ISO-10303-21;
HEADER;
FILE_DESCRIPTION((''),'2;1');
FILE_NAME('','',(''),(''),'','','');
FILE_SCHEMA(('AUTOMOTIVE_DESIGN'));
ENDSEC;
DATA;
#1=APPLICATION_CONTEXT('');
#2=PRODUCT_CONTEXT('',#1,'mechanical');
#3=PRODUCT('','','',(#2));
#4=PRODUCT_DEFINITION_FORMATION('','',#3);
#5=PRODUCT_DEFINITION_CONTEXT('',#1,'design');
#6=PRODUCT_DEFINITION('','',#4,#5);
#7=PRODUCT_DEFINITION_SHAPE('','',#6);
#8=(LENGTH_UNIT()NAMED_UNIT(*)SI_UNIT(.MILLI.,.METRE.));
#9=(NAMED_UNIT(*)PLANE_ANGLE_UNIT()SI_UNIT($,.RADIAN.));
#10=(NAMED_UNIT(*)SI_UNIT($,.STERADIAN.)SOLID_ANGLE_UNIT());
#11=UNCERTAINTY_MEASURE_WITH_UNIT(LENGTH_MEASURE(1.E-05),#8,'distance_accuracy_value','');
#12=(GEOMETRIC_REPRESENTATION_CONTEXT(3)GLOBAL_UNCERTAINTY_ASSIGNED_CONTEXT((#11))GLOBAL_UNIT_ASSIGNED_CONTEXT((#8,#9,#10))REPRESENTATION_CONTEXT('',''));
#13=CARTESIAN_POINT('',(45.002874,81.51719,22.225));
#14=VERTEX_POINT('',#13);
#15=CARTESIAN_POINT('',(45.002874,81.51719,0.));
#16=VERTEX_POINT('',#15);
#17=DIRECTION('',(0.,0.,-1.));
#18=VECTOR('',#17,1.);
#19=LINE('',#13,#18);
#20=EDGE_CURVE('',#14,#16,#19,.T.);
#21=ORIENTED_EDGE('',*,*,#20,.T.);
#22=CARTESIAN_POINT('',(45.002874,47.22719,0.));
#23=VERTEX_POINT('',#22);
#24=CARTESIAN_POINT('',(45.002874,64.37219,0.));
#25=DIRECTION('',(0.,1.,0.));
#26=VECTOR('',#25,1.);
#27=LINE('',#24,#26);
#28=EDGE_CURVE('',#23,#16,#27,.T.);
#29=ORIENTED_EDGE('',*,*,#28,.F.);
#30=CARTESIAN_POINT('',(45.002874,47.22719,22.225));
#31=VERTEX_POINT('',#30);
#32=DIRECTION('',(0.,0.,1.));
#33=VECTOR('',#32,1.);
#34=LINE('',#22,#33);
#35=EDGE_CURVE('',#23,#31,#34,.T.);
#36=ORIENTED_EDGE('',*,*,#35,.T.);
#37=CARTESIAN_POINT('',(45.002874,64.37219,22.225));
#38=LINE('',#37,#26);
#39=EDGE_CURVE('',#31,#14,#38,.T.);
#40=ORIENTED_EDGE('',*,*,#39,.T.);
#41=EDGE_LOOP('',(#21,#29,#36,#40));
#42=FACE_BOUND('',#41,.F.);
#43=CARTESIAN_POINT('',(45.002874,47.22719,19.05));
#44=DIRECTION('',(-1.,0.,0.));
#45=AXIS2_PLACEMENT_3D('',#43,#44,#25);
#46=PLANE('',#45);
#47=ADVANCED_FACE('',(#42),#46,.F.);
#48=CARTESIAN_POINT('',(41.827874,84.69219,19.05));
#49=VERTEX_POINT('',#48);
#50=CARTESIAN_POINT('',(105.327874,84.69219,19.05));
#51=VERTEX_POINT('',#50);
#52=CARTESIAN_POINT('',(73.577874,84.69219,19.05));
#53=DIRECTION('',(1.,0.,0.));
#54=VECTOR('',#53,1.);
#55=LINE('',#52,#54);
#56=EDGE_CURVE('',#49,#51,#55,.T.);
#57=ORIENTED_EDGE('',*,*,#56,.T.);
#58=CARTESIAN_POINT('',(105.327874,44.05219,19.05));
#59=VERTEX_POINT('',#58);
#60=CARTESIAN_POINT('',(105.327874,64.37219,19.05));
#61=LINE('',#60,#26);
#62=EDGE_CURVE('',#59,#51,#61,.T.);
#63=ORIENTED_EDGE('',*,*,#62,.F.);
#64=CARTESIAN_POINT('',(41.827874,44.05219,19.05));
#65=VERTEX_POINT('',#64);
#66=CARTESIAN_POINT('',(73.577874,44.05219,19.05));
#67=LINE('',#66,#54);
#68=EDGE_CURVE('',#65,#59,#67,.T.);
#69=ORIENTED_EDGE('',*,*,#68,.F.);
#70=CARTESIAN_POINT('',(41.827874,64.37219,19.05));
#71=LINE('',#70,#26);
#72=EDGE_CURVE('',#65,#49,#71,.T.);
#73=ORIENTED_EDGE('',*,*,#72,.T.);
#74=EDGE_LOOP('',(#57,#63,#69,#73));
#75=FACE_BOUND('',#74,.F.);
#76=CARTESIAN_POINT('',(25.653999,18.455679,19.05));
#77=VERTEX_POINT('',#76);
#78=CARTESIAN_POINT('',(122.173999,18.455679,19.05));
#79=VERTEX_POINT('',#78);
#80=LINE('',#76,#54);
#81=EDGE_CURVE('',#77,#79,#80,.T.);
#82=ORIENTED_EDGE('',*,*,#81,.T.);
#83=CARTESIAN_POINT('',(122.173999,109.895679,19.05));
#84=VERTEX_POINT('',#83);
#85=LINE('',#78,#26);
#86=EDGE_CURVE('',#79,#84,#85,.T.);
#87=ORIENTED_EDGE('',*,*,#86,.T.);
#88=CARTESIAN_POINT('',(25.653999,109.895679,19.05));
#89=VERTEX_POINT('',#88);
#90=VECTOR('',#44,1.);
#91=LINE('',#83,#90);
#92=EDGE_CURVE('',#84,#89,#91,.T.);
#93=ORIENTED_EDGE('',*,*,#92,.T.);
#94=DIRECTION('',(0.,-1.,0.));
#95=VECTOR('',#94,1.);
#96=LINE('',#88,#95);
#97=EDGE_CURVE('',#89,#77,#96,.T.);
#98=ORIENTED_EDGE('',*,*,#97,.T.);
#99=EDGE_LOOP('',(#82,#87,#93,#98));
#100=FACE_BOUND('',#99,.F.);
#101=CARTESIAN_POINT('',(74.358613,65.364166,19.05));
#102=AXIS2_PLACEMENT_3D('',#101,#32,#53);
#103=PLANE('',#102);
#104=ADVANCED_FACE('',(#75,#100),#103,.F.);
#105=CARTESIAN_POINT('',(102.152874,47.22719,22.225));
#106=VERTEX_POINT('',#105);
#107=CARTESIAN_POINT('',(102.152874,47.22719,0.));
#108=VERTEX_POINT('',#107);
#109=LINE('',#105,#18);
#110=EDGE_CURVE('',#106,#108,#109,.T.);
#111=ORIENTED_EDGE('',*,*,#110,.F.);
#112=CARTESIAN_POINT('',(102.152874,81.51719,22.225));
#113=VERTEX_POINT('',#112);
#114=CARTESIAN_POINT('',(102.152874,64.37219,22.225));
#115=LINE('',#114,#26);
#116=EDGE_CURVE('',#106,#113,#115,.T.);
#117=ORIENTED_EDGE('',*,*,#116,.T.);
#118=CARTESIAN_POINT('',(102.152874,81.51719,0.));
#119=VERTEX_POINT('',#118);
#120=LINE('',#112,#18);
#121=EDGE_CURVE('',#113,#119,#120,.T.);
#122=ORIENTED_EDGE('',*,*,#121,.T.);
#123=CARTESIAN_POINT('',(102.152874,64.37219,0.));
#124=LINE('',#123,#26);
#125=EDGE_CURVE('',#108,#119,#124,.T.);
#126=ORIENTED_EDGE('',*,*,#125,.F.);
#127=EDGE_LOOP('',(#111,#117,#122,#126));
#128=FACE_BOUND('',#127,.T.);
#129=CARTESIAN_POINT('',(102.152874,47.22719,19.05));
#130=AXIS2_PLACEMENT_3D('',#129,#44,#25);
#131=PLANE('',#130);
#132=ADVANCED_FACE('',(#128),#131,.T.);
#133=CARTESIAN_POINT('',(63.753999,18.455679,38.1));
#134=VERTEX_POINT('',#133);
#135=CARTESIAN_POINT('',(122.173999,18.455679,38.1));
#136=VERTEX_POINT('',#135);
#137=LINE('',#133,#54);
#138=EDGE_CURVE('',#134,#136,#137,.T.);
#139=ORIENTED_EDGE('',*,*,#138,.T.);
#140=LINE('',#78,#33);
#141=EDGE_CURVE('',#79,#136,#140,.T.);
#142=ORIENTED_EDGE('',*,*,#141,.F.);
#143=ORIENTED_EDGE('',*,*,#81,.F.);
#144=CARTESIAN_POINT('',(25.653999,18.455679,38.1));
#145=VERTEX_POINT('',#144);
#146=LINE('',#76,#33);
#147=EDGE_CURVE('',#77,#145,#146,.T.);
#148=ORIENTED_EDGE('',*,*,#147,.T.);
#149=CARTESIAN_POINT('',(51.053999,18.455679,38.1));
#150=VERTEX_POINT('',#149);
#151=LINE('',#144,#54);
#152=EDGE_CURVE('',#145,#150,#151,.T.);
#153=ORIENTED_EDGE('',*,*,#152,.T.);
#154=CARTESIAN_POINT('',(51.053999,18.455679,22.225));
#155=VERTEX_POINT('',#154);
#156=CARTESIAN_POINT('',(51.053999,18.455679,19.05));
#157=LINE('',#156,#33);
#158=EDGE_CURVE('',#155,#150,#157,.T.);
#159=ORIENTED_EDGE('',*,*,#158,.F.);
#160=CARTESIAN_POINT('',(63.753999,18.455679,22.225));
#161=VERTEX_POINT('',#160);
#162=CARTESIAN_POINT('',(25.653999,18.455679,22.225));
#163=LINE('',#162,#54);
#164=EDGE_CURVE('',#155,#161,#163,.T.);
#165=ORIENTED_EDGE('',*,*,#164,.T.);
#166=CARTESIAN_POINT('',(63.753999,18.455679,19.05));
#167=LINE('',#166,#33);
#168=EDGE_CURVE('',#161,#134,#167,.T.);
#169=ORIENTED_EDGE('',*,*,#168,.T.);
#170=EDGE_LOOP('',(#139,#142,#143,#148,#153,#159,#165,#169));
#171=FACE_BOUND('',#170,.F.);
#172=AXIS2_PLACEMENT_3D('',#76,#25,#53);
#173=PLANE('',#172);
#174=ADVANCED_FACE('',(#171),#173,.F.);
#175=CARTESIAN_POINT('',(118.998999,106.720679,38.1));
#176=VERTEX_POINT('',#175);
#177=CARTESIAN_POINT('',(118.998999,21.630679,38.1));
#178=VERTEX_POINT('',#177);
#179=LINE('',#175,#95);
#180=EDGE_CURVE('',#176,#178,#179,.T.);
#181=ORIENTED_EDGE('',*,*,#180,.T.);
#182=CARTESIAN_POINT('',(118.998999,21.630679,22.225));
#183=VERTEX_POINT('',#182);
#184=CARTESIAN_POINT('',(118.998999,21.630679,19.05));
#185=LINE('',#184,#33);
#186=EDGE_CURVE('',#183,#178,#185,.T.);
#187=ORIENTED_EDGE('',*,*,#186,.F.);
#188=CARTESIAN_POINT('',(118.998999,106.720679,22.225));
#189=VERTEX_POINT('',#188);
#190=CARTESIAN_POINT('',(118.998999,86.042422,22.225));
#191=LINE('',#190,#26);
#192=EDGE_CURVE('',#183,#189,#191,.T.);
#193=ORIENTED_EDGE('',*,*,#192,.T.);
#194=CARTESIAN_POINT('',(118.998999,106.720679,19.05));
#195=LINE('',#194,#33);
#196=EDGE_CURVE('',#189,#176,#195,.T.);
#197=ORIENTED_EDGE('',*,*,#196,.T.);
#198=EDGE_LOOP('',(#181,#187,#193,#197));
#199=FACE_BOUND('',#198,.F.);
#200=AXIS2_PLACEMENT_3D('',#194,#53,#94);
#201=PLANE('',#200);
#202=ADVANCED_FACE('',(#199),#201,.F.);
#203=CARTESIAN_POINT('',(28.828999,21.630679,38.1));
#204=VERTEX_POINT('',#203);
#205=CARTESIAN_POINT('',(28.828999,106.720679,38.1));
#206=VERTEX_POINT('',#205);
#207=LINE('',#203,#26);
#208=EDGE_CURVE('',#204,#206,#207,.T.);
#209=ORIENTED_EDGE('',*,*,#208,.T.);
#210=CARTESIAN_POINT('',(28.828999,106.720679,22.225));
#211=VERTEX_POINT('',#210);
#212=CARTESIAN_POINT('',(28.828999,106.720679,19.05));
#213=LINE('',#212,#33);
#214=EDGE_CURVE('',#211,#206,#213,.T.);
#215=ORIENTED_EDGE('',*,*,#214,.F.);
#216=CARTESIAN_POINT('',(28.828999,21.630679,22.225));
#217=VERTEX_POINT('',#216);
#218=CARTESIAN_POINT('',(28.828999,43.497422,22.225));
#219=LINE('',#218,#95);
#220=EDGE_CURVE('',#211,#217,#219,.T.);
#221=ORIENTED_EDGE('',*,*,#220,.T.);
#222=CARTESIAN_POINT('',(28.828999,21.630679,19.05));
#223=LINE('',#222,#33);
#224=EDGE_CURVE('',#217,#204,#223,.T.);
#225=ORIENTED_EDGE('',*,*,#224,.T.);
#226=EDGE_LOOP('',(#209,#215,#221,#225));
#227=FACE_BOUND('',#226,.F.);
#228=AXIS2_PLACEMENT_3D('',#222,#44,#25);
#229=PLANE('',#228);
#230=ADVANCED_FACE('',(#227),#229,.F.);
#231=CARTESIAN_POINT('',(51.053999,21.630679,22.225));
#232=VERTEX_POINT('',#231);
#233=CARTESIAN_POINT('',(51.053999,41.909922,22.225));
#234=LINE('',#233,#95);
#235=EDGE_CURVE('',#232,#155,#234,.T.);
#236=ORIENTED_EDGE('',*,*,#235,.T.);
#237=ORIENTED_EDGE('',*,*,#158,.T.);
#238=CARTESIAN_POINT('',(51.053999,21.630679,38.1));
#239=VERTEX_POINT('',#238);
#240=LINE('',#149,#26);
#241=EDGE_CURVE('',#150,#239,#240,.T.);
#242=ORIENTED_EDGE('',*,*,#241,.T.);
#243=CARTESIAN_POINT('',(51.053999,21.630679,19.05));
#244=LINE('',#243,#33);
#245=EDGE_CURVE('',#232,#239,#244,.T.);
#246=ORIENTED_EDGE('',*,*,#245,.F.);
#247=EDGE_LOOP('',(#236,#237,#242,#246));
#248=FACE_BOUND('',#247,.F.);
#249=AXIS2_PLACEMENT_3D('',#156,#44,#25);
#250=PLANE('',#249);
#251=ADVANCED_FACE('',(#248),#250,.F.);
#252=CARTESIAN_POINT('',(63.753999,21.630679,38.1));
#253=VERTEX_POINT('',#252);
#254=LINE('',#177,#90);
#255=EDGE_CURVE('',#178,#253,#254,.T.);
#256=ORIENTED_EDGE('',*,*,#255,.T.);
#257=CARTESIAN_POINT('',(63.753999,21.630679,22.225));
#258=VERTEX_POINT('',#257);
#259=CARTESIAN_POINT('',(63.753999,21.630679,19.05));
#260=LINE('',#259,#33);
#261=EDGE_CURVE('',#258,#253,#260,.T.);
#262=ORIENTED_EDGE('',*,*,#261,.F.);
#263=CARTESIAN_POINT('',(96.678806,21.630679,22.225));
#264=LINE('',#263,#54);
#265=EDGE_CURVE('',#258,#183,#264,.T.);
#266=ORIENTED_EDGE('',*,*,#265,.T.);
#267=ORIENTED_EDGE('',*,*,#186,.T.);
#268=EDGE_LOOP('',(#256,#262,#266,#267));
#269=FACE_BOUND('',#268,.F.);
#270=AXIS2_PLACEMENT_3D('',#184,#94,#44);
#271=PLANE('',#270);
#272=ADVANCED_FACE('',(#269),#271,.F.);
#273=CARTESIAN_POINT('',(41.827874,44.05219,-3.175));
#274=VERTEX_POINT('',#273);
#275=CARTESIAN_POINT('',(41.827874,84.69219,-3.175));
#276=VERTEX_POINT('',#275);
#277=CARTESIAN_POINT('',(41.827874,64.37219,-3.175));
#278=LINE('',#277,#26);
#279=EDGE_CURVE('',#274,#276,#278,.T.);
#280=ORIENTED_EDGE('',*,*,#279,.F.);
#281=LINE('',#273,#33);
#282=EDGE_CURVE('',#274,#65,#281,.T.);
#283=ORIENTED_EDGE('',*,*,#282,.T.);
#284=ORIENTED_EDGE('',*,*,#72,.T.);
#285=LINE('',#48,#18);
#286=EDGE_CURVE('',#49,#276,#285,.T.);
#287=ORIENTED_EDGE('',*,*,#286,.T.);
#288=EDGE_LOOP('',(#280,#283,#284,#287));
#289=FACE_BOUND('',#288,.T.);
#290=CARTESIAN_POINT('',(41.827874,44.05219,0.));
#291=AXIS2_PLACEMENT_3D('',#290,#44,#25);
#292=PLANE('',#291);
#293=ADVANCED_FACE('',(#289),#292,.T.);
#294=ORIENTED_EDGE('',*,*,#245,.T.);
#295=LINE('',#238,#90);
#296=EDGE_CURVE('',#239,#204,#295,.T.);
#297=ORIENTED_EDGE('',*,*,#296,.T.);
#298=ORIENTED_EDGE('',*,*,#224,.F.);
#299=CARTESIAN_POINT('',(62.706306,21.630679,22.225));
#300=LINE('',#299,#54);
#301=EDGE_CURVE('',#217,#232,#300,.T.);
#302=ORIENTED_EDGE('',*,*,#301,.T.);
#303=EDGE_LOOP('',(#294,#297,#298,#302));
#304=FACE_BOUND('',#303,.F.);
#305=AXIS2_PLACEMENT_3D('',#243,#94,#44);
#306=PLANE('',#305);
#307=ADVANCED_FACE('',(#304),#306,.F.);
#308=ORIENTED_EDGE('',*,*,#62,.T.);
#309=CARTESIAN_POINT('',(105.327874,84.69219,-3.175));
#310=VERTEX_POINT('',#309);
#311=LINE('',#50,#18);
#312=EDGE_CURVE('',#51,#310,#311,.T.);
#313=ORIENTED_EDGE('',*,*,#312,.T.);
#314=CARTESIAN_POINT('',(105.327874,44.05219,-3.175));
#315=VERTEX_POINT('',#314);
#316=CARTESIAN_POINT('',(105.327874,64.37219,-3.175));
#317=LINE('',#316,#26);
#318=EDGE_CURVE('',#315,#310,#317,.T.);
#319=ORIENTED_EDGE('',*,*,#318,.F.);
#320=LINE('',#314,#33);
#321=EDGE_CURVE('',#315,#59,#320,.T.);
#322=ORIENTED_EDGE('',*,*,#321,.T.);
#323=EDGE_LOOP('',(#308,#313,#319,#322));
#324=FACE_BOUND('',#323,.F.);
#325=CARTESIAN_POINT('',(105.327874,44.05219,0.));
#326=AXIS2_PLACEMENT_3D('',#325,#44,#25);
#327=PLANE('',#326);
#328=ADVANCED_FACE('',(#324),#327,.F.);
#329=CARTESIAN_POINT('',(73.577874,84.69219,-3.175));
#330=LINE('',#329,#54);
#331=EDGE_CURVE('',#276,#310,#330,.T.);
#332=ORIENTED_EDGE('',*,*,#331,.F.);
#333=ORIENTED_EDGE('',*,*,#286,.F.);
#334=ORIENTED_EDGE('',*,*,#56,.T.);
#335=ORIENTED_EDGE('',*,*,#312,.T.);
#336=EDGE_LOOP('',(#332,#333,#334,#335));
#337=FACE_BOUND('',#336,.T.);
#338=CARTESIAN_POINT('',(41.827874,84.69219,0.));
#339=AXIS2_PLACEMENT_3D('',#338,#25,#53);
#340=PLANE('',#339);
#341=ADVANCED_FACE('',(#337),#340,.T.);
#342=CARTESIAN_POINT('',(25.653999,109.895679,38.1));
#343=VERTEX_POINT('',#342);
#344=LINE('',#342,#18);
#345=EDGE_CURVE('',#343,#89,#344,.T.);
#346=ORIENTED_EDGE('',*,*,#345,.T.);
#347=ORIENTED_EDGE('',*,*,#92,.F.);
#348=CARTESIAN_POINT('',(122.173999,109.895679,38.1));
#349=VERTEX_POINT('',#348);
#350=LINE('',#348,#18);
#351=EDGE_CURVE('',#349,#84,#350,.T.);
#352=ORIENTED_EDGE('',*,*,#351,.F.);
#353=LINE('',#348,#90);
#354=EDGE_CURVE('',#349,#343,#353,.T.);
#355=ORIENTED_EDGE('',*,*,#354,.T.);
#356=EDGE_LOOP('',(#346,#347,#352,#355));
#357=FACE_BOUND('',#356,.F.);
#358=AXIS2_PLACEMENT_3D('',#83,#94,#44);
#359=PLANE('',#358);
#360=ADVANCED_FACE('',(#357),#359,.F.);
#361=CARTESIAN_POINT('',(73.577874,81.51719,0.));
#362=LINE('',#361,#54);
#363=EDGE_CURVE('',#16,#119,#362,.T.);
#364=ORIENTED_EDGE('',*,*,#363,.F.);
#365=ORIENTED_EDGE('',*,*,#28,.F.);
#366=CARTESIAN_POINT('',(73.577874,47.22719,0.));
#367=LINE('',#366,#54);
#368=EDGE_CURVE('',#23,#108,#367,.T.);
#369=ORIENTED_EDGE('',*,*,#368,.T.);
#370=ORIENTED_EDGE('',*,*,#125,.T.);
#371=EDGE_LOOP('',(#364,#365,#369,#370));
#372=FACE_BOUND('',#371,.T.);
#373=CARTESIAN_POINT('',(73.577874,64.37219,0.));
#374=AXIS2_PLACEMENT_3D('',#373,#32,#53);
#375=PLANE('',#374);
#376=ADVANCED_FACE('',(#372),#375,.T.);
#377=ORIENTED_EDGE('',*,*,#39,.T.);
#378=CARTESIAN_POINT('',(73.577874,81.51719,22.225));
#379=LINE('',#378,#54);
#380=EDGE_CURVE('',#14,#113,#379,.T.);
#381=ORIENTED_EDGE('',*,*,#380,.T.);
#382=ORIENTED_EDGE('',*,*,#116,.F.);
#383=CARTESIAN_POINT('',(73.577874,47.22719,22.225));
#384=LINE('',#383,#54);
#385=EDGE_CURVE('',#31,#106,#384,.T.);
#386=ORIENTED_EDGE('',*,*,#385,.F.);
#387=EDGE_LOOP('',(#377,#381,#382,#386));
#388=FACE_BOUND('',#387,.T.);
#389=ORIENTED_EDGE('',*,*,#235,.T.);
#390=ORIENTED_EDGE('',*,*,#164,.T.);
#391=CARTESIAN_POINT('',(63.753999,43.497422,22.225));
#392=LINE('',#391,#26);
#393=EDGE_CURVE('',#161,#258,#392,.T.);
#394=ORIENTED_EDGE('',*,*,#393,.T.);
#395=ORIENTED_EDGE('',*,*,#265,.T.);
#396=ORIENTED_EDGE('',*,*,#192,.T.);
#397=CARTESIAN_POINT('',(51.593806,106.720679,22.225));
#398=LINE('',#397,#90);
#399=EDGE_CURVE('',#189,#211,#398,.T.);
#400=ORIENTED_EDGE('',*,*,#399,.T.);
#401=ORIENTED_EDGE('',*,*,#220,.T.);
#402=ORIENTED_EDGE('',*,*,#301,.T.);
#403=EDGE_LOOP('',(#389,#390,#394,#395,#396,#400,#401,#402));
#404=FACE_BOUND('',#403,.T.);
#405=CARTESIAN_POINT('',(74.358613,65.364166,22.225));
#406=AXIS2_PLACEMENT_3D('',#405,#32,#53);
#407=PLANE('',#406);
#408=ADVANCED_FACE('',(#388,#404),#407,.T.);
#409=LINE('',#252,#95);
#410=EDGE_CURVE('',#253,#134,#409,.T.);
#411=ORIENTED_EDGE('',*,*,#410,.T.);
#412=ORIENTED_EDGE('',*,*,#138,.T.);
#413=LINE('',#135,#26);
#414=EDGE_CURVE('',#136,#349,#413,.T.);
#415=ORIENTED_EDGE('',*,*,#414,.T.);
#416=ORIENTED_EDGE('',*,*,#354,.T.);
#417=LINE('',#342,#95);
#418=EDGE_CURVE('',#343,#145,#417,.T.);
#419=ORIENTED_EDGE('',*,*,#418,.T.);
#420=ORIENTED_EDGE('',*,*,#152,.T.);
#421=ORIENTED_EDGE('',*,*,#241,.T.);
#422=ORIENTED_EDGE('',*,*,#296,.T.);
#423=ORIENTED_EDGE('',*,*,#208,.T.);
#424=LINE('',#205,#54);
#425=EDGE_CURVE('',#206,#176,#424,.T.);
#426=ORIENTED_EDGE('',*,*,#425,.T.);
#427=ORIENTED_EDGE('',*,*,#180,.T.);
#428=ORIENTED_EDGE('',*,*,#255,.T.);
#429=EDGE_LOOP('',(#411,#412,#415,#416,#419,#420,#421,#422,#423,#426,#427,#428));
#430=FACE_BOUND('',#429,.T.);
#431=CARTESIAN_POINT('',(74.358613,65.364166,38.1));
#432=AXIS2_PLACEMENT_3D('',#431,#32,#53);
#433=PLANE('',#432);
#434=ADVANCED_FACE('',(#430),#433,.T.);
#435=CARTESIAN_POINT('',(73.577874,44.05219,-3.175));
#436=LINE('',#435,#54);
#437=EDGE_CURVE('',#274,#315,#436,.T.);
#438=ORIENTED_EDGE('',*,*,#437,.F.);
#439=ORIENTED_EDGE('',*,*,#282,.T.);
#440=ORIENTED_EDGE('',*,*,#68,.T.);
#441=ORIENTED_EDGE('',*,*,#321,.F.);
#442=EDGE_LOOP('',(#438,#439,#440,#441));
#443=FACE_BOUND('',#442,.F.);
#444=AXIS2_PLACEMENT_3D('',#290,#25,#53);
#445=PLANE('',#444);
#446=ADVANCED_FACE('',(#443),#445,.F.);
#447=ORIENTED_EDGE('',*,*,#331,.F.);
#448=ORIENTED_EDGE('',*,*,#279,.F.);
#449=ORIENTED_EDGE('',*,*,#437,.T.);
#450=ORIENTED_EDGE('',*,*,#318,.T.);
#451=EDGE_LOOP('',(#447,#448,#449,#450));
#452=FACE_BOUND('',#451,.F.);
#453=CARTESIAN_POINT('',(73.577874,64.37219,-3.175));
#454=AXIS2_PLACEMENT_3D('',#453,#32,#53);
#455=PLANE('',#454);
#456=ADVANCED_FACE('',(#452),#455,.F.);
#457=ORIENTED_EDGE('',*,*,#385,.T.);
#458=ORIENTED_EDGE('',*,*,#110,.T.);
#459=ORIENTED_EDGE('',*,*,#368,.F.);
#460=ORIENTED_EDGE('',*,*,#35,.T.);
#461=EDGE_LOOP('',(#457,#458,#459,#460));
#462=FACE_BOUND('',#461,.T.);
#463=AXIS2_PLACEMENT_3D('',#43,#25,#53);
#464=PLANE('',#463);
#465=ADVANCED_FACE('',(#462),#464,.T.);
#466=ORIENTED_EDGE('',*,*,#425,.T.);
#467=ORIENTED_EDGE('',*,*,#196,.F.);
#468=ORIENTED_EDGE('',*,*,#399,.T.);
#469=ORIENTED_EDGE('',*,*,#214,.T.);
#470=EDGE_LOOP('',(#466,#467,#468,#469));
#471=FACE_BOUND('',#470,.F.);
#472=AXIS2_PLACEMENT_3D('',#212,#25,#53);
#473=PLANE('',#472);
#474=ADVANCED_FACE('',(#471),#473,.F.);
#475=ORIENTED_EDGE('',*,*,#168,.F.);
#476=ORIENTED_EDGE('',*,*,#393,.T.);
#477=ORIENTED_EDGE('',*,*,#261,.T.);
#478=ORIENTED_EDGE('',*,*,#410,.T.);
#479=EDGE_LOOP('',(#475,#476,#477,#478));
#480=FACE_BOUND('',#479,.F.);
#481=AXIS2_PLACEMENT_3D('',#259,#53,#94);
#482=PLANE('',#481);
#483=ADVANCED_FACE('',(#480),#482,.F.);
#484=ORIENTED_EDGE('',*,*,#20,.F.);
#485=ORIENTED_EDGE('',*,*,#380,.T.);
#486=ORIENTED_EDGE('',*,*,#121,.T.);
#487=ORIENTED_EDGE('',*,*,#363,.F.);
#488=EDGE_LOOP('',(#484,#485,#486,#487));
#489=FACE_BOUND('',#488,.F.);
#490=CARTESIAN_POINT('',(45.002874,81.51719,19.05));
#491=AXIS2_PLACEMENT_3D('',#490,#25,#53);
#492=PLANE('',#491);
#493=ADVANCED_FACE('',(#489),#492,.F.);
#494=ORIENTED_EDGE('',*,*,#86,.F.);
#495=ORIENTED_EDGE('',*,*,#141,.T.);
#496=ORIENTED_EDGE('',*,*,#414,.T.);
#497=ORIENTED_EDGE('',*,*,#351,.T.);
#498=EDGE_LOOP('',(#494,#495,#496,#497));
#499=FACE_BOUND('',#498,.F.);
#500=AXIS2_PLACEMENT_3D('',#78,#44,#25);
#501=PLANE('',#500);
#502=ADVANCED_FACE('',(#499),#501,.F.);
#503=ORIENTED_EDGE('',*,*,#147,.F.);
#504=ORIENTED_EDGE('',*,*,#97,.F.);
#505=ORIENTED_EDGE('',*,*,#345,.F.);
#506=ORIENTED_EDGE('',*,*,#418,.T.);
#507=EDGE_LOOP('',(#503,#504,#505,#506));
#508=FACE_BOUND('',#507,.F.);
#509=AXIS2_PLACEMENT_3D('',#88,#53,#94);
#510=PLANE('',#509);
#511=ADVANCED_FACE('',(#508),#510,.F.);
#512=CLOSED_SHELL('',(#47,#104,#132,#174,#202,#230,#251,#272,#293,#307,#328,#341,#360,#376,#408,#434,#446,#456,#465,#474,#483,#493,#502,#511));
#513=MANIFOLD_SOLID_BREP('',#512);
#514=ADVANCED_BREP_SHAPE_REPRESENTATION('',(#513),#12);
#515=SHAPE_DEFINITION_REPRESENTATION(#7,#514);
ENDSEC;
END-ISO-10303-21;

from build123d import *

# Parameters (mm, degrees)
F0_W     = 63.5
F0_H     = 40.64
F0_W_2   = 57.15
F0_H_2   = 34.29
F1_DEPTH = 3.175
F2_DEPTH = 19.05
F3_W     = 57.15
F3_H     = 34.29
F4_DEPTH = 3.175
F5_DEPTH = 19.05


# Not quite as in the source:
# - a length typed as a fraction of an inch, garbled in the dataset ("3 / 203.2 mm" for 3/8 in), is restored


with BuildPart() as f1:
    # F0 (on Top) → F1 (new body)
    with BuildSketch(Plane.XY):
        with Locations((73.5778744221, 64.3721897411)):
            Rectangle(F0_W, F0_H)
        with Locations((73.5778744221, 64.3721897411)):
            Rectangle(F0_W_2, F0_H_2, mode=Mode.SUBTRACT)
        with Locations((73.5778744221, 64.3721897411)):
            Rectangle(F0_W_2, F0_H_2)
    extrude(amount=-F1_DEPTH)

    # F0 (on Top) → F2 (join)
    with BuildSketch(Plane.XY):
        with Locations((73.5778744221, 64.3721897411)):
            Rectangle(F0_W, F0_H)
        with Locations((73.5778744221, 64.3721897411)):
            Rectangle(F0_W_2, F0_H_2, mode=Mode.SUBTRACT)
    extrude(amount=F2_DEPTH)

    # F3 (on face) → F4 (join)
    with BuildSketch(Plane.XY.offset(19.05)):
        Polygon((25.6539992988, 109.8956785083), (25.6539992988, 18.4556785083), (51.0539992988, 18.4556785083), (51.0539992988, 21.6306785083), (28.8289992988, 21.6306785083), (28.8289992988, 106.7206785083), (118.9989992988, 106.7206785083), (118.9989992988, 21.6306785083), (63.7539992988, 21.6306785083), (63.7539992988, 18.4556785083), (122.1739992988, 18.4556785083), (122.1739992988, 109.8956785083), align=None)
        Polygon((51.0539992988, 21.6306785083), (51.0539992988, 18.4556785083), (63.7539992988, 18.4556785083), (63.7539992988, 21.6306785083), (118.9989992988, 21.6306785083), (118.9989992988, 106.7206785083), (28.8289992988, 106.7206785083), (28.8289992988, 21.6306785083), align=None)
        with Locations((73.5778744221, 64.3721897411)):
            Rectangle(F3_W, F3_H, mode=Mode.SUBTRACT)
    extrude(amount=F4_DEPTH)

    # F3 (on face) → F5 (join)
    with BuildSketch(Plane.XY.offset(19.05)):
        Polygon((25.6539992988, 109.8956785083), (25.6539992988, 18.4556785083), (51.0539992988, 18.4556785083), (51.0539992988, 21.6306785083), (28.8289992988, 21.6306785083), (28.8289992988, 106.7206785083), (118.9989992988, 106.7206785083), (118.9989992988, 21.6306785083), (63.7539992988, 21.6306785083), (63.7539992988, 18.4556785083), (122.1739992988, 18.4556785083), (122.1739992988, 109.8956785083), align=None)
    extrude(amount=F5_DEPTH)


solid = f1.part
